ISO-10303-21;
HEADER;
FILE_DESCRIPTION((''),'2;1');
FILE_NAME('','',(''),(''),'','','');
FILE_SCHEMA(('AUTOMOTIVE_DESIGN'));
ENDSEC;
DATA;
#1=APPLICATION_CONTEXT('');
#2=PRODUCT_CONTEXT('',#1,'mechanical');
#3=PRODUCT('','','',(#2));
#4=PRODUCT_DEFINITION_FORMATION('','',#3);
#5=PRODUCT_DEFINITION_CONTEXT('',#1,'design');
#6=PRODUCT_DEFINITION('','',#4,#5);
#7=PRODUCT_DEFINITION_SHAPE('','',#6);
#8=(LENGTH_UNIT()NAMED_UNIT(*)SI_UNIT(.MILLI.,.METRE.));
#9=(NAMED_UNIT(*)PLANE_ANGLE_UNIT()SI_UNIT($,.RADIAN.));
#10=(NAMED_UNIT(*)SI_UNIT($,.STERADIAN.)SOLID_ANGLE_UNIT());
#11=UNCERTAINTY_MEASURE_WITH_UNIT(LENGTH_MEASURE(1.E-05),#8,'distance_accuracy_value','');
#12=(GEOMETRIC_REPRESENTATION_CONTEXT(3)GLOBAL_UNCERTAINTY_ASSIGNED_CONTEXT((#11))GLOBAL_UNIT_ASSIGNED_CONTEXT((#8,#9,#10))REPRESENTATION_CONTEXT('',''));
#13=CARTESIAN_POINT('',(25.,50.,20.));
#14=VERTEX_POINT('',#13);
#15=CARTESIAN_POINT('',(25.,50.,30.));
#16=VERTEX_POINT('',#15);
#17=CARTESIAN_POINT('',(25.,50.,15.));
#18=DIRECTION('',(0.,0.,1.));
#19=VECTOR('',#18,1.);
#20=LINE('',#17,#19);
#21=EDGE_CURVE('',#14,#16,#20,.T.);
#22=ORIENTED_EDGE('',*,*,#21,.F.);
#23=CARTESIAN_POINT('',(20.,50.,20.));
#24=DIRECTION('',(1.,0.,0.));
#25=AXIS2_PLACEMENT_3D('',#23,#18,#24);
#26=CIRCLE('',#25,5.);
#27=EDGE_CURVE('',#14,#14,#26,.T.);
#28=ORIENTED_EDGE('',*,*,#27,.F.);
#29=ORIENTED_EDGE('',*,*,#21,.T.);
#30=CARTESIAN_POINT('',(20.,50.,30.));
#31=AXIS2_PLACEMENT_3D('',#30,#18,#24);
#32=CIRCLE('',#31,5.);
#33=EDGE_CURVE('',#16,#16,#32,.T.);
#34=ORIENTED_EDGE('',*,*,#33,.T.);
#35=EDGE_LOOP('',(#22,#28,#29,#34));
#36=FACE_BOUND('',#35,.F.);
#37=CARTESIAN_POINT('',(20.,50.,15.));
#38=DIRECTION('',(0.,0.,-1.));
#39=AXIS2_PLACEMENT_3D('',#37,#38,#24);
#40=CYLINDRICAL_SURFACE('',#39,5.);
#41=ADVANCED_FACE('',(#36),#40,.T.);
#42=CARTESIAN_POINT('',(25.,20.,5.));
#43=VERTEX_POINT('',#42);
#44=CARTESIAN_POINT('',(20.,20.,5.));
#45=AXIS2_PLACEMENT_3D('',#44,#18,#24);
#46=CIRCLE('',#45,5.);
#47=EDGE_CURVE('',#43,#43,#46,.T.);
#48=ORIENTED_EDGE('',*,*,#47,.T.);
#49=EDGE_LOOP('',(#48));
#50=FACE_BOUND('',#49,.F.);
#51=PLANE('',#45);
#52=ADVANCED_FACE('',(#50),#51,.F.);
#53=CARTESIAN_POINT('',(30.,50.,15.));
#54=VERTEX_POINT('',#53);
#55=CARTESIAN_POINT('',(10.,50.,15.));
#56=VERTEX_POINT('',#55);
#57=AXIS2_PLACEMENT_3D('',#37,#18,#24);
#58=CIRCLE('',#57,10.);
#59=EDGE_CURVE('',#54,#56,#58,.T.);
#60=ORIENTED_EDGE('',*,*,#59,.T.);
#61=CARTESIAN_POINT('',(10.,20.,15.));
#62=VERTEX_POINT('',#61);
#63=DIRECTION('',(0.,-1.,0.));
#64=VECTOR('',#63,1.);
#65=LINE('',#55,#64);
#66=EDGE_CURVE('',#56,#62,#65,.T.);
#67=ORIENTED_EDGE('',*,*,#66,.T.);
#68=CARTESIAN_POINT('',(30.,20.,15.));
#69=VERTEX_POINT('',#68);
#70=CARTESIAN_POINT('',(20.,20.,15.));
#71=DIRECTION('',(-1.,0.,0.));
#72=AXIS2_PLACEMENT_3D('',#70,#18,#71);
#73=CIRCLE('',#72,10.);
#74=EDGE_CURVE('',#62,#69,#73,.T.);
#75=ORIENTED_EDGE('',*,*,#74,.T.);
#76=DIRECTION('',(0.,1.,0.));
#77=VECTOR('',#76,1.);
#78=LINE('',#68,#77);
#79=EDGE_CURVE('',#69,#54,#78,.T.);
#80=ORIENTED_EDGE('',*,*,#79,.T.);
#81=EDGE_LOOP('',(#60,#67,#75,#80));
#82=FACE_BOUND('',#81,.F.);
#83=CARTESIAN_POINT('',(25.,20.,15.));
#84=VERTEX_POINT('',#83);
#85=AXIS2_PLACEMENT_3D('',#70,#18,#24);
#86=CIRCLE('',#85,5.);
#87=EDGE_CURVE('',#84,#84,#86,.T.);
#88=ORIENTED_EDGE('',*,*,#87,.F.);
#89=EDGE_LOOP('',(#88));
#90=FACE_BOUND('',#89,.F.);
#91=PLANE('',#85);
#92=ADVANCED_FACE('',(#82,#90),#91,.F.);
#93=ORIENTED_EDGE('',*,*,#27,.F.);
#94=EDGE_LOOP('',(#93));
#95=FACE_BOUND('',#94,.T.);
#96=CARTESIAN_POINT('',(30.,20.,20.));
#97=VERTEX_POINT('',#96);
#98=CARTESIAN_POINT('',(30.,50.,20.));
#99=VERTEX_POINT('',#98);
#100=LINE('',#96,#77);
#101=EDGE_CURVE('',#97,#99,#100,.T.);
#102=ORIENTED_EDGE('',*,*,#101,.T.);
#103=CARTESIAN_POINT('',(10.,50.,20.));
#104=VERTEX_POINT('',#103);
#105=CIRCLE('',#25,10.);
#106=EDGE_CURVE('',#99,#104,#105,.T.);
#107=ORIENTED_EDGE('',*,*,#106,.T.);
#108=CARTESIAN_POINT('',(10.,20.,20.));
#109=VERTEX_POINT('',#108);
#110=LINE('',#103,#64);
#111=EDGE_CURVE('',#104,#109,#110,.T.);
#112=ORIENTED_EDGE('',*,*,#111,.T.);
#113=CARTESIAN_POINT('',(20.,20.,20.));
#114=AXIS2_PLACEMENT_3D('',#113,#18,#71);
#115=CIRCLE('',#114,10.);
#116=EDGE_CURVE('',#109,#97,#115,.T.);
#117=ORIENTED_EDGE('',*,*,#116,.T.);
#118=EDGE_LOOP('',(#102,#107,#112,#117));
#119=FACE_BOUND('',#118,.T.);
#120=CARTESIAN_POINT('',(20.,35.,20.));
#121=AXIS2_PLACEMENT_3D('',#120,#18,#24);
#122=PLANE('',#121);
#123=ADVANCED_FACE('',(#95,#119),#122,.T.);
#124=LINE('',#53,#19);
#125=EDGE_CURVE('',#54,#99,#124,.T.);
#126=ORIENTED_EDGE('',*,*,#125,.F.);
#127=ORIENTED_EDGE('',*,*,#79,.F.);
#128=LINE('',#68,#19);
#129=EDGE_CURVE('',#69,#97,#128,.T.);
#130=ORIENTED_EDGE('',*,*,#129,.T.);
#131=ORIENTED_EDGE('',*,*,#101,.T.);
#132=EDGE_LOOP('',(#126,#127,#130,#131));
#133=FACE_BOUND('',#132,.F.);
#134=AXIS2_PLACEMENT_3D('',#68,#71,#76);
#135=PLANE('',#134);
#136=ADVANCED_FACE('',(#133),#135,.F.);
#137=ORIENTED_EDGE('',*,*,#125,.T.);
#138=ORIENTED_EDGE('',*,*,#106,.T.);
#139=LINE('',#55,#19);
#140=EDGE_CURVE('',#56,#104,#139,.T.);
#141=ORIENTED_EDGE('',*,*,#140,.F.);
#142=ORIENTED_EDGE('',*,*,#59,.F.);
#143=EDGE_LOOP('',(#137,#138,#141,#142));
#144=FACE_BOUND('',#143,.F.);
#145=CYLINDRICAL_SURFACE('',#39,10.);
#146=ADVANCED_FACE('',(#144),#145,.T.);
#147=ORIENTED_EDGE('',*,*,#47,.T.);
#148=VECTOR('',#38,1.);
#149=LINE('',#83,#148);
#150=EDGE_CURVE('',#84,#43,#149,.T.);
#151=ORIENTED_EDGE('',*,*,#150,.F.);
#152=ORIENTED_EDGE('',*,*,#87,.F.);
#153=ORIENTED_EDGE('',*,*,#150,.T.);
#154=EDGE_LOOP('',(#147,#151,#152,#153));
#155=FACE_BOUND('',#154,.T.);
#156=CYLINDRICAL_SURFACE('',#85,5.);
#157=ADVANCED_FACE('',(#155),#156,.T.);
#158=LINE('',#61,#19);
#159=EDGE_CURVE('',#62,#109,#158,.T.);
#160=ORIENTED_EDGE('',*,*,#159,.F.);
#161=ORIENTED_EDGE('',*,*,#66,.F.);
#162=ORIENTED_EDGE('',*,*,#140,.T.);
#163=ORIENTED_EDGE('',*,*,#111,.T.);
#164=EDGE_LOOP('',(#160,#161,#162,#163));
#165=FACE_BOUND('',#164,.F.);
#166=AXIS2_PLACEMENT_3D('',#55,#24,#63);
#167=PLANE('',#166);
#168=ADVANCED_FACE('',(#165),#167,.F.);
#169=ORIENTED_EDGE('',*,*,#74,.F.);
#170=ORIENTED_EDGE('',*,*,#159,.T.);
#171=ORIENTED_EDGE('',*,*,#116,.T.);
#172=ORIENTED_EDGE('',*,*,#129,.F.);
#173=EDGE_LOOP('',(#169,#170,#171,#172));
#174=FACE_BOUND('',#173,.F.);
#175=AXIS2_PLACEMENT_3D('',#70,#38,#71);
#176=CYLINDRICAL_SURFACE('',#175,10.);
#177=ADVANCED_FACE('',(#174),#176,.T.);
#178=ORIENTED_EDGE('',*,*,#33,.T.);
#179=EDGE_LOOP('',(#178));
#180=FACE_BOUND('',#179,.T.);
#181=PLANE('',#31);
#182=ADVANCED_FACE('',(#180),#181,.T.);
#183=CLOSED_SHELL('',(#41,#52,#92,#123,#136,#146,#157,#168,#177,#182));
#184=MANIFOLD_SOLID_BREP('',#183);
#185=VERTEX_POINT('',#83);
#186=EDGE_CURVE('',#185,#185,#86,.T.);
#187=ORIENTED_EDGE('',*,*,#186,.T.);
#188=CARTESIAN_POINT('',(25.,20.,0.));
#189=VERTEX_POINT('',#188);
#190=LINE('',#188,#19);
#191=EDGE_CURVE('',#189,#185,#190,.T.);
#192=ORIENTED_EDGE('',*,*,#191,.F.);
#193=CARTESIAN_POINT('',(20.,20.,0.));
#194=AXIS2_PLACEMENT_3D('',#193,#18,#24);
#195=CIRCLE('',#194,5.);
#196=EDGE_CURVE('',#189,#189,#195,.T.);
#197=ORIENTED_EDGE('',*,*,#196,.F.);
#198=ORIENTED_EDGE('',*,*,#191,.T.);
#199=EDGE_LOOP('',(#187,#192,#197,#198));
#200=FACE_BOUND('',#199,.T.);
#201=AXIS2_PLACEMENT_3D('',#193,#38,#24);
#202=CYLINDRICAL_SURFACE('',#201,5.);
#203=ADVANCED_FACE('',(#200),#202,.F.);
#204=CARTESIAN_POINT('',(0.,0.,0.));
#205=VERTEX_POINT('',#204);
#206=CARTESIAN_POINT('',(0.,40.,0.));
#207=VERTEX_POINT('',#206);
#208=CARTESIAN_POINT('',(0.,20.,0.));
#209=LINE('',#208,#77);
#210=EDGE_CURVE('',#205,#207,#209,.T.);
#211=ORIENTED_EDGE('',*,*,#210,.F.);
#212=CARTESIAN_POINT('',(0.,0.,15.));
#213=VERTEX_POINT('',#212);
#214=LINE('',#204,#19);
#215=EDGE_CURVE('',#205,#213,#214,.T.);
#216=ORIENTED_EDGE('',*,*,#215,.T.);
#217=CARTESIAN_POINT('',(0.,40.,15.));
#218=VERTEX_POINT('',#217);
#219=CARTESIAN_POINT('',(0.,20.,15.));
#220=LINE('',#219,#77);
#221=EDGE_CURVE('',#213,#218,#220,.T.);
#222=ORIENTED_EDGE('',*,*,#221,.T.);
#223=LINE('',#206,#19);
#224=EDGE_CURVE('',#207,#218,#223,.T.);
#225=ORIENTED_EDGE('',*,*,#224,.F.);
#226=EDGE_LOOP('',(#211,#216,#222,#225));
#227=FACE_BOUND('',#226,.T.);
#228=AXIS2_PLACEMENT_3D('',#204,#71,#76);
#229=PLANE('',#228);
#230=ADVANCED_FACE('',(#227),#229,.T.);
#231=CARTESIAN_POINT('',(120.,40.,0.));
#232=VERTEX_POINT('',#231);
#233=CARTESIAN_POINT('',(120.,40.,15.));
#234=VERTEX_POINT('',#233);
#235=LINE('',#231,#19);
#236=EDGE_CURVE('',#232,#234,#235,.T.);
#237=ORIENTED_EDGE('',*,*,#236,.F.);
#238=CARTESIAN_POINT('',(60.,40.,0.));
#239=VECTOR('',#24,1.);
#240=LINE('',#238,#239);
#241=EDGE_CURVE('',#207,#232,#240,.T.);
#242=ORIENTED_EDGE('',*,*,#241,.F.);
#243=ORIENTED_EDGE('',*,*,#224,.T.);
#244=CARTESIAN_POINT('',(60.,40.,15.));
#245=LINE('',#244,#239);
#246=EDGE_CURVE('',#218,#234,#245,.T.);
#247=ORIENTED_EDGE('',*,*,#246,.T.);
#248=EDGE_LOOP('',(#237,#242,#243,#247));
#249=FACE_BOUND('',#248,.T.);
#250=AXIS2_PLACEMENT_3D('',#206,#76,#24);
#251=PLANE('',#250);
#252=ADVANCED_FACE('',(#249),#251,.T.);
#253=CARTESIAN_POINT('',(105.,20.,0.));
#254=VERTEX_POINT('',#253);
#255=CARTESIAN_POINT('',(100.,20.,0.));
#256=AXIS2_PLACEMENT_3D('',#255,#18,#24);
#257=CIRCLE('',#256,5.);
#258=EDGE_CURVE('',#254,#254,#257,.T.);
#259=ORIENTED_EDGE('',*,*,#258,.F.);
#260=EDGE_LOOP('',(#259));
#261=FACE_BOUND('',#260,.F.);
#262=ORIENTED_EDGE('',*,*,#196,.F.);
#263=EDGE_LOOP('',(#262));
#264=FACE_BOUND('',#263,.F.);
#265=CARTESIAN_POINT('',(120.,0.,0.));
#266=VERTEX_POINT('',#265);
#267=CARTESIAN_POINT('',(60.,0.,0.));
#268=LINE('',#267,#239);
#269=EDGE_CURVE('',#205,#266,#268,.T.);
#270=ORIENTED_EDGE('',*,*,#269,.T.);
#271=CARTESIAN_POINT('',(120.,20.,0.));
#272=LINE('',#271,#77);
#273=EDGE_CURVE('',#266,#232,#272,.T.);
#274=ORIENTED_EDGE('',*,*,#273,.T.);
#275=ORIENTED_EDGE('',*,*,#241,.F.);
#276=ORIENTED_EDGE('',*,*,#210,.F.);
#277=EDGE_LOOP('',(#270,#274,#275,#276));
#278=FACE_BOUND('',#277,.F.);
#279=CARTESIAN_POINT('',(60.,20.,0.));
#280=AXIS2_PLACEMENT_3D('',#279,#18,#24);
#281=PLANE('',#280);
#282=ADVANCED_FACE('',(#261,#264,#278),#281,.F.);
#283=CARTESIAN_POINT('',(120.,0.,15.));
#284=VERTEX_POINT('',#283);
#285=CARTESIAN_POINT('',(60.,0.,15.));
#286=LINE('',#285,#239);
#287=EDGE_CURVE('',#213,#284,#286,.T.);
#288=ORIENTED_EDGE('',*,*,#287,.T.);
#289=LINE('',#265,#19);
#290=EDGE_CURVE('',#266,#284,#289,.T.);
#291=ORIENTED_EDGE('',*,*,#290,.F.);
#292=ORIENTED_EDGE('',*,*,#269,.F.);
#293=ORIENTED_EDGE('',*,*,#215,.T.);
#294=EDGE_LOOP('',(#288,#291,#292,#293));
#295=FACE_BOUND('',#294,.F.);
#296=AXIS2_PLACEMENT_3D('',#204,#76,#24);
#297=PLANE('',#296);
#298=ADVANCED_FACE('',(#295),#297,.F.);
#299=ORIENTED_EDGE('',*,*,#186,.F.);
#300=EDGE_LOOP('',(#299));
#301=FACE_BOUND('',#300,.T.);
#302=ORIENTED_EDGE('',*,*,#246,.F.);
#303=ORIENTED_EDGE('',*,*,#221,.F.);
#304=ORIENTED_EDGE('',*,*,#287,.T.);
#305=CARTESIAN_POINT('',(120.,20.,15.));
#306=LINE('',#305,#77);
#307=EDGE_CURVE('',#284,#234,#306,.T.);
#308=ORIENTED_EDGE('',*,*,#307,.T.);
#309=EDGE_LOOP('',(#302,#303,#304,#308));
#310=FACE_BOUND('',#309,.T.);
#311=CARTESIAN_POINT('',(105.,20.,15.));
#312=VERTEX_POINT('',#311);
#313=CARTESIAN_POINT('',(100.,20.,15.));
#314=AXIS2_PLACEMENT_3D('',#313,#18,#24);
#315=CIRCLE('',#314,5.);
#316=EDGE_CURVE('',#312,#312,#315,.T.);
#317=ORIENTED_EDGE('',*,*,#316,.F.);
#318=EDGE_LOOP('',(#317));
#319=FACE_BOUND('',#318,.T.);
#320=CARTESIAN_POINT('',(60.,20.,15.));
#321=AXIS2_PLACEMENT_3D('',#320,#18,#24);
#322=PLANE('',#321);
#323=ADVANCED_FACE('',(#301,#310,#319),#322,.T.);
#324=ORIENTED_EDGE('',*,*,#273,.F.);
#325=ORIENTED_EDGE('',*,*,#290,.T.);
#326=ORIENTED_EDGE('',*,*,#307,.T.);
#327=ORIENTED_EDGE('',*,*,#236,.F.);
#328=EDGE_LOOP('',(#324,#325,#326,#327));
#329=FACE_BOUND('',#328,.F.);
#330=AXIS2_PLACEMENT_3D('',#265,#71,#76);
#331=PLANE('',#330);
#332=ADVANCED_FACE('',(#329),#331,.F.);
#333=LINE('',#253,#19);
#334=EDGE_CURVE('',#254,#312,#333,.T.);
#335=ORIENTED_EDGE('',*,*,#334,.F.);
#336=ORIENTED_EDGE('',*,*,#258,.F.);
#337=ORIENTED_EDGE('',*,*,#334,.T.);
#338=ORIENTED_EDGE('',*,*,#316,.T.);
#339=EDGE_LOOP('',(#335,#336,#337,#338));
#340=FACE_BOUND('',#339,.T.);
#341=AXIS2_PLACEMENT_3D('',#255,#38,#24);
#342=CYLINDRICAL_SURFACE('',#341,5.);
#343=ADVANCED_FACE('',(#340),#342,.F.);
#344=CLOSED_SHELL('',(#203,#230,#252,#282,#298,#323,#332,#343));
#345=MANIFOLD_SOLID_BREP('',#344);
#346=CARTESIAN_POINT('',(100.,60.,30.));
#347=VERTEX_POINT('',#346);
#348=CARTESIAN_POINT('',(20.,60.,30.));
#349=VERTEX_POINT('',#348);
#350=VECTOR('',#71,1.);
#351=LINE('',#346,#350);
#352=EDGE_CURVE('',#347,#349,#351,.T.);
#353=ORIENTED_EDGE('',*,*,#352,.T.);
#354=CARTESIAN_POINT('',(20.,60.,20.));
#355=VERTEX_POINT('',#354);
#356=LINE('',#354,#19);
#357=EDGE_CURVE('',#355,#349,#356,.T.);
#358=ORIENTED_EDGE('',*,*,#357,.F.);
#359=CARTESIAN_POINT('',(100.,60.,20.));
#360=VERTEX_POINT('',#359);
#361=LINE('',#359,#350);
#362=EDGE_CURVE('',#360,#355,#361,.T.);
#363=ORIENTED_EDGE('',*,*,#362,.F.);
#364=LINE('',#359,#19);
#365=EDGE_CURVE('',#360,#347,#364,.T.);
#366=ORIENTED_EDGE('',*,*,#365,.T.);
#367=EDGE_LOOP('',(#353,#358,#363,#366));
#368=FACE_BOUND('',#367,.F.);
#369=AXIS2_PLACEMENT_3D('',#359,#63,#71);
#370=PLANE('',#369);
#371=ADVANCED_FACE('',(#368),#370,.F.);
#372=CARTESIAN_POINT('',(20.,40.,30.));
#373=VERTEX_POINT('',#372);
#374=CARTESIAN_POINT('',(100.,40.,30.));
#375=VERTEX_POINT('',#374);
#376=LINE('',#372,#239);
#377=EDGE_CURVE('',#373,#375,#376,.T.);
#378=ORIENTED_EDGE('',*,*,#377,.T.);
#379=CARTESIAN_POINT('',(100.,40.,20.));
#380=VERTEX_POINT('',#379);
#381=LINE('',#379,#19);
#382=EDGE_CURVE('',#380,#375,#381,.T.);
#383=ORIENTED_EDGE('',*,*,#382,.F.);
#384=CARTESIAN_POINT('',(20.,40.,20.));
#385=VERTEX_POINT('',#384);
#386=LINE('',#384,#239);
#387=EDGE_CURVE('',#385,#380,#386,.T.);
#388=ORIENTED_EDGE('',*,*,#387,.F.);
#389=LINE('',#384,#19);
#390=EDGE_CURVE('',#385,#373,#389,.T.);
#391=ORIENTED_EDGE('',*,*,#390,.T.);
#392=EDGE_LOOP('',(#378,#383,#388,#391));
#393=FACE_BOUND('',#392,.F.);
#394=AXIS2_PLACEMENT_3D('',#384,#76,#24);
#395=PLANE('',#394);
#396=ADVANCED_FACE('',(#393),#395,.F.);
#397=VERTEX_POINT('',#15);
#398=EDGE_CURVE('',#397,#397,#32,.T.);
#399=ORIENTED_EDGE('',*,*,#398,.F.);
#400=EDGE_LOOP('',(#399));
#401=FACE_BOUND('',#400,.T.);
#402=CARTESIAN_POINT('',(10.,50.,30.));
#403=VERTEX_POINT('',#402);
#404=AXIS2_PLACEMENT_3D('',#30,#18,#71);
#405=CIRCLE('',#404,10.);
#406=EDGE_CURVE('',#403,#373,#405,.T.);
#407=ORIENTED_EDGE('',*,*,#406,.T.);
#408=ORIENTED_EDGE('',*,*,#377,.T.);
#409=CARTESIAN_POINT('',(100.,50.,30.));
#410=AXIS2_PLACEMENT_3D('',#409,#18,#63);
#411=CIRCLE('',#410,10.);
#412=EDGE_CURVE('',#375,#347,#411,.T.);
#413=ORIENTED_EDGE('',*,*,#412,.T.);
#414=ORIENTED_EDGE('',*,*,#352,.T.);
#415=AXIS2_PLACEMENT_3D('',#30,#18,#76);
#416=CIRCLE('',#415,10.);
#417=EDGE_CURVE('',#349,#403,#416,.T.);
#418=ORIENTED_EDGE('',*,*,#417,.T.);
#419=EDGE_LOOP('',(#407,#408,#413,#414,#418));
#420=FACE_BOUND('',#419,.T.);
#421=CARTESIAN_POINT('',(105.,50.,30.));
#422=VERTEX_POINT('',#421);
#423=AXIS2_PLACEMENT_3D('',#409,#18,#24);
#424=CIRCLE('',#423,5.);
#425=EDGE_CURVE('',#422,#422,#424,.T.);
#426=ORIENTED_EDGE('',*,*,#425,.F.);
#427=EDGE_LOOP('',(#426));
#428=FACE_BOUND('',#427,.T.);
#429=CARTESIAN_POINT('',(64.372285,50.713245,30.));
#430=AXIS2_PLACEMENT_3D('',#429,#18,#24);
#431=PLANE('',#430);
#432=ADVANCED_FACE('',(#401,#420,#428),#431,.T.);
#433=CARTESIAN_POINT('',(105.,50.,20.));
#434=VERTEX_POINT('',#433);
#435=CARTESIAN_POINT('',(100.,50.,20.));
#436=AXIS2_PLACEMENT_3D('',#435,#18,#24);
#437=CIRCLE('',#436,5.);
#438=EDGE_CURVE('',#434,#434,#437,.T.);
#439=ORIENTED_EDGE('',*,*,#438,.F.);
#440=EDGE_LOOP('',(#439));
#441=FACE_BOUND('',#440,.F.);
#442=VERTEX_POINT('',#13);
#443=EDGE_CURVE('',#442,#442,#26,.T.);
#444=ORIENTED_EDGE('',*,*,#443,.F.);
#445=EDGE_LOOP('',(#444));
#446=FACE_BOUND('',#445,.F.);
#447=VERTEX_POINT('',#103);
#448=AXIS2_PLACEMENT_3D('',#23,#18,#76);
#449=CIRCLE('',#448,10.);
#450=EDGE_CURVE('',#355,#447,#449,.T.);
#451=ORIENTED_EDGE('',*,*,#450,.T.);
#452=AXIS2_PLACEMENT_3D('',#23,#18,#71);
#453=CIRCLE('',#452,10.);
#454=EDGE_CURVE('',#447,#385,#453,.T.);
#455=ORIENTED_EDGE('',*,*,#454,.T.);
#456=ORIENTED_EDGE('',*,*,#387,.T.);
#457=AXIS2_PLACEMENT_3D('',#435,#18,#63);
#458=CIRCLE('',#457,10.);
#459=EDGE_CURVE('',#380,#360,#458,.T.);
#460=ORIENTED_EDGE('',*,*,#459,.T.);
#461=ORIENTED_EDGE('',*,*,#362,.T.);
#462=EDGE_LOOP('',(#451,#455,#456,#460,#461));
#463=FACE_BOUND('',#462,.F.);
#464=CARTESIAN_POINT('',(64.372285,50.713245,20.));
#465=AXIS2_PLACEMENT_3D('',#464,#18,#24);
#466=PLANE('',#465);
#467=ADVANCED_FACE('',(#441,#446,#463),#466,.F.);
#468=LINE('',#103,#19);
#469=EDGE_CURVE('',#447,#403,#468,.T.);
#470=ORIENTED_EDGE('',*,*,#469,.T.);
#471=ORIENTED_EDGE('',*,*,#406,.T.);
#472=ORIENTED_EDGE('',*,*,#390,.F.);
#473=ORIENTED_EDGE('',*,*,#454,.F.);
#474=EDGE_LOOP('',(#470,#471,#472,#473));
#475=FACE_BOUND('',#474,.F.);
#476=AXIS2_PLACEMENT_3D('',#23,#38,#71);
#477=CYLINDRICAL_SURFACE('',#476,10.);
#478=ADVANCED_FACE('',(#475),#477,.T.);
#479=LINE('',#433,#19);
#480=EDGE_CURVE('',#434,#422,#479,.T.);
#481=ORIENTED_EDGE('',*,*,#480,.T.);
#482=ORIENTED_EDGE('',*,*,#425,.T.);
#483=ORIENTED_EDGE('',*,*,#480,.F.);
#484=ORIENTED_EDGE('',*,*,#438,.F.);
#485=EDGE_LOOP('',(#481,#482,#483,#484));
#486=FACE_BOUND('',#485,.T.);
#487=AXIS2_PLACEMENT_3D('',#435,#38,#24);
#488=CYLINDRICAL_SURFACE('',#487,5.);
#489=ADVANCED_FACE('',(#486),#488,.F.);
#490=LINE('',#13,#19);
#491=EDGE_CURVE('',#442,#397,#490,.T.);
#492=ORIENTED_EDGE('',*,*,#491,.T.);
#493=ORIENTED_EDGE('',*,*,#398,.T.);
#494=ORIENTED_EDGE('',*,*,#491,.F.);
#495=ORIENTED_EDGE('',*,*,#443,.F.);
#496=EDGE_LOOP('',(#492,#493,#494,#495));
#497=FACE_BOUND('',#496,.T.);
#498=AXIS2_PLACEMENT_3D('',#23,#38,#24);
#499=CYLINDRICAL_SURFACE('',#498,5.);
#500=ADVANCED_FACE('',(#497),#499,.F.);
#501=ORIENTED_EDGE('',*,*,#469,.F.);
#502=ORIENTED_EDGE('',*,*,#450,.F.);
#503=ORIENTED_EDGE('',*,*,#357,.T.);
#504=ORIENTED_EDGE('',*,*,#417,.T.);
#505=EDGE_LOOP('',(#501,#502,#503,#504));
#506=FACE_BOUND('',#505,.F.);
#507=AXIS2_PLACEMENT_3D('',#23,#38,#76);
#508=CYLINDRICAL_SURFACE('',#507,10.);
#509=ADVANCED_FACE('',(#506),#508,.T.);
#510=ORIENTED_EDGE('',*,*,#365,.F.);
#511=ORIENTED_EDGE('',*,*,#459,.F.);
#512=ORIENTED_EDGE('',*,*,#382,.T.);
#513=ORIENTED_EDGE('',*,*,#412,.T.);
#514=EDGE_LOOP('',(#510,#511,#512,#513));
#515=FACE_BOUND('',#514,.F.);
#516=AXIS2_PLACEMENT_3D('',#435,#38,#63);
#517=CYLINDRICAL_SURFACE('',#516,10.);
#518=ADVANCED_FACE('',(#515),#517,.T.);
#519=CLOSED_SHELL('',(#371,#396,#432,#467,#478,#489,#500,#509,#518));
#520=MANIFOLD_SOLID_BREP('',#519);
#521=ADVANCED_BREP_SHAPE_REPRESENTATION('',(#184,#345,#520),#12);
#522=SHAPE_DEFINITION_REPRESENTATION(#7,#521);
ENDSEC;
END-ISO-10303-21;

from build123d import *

# Parameters (mm, degrees)
F0_W          = 120
F0_H          = 40
F0_R          = 5
F1_DEPTH      = 15
F2_R          = 5
F3_DEPTH      = 5
F4_DEPTH      = 15
F5_DEPTH      = 5
F5_DEPTH_BACK = 10
F6_R          = 5
F7_DEPTH      = 10


with BuildPart() as f1:
    # F0 (on Top) → F1 (new body)
    with BuildSketch(Plane.XY):
        with Locations((60, 20)):
            Rectangle(F0_W, F0_H)
        with Locations((20, 20)):
            Circle(F0_R, mode=Mode.SUBTRACT)
        with Locations((100, 20)):
            Circle(F0_R, mode=Mode.SUBTRACT)
    extrude(amount=F1_DEPTH)


with BuildPart() as f3:
    # F2 (on face) → F3 (new body)
    with BuildSketch(Plane.XY.offset(15)):
        with BuildLine():
            Line((30, 20), (30, 50))
            ThreePointArc((30, 50), (20, 60), (10, 50))
            Line((10, 50), (10, 20))
            ThreePointArc((10, 20), (20, 10), (30, 20))
        make_face()
        with Locations((20, 20)):
            Circle(F2_R, mode=Mode.SUBTRACT)
        with Locations((20, 50)):
            Circle(F2_R, mode=Mode.SUBTRACT)
    extrude(amount=F3_DEPTH)

    # F2 (on face) → F4 (join)
    with BuildSketch(Plane.XY.offset(15)):
        with Locations((20, 50)):
            Circle(F2_R)
    extrude(amount=F4_DEPTH)

    # F2 (on face) → F5 (join, two sides)
    with BuildSketch(Plane.XY.offset(15)) as f5_sk:
        with Locations((20, 20)):
            Circle(F2_R)
    extrude(amount=F5_DEPTH)
    extrude(f5_sk.sketch, amount=-F5_DEPTH_BACK)


with BuildPart() as f7:
    # F6 (on face) → F7 (new body)
    with BuildSketch(Plane.XY.offset(20)):
        with BuildLine():
            Line((100, 60), (20, 60))
            ThreePointArc((20, 60), (27.0710678119, 57.0710678119), (30, 50))
            Line((30, 50), (30, 40))
            Line((30, 40), (100, 40))
            ThreePointArc((100, 40), (110, 50), (100, 60))
        make_face()
        with Locations((100, 50)):
            Circle(F6_R, mode=Mode.SUBTRACT)
        with BuildLine():
            ThreePointArc((30, 50), (27.0710678119, 57.0710678119), (20, 60))
            ThreePointArc((20, 60), (12.9289321881, 57.0710678119), (10, 50))
            ThreePointArc((10, 50), (12.9289321881, 42.9289321881), (20, 40))
            Line((20, 40), (30, 40))
            Line((30, 40), (30, 50))
        make_face()
        with Locations((20, 50)):
            Circle(F6_R, mode=Mode.SUBTRACT)
    extrude(amount=F7_DEPTH)


solid = Compound([f1.part, f3.part, f7.part])
